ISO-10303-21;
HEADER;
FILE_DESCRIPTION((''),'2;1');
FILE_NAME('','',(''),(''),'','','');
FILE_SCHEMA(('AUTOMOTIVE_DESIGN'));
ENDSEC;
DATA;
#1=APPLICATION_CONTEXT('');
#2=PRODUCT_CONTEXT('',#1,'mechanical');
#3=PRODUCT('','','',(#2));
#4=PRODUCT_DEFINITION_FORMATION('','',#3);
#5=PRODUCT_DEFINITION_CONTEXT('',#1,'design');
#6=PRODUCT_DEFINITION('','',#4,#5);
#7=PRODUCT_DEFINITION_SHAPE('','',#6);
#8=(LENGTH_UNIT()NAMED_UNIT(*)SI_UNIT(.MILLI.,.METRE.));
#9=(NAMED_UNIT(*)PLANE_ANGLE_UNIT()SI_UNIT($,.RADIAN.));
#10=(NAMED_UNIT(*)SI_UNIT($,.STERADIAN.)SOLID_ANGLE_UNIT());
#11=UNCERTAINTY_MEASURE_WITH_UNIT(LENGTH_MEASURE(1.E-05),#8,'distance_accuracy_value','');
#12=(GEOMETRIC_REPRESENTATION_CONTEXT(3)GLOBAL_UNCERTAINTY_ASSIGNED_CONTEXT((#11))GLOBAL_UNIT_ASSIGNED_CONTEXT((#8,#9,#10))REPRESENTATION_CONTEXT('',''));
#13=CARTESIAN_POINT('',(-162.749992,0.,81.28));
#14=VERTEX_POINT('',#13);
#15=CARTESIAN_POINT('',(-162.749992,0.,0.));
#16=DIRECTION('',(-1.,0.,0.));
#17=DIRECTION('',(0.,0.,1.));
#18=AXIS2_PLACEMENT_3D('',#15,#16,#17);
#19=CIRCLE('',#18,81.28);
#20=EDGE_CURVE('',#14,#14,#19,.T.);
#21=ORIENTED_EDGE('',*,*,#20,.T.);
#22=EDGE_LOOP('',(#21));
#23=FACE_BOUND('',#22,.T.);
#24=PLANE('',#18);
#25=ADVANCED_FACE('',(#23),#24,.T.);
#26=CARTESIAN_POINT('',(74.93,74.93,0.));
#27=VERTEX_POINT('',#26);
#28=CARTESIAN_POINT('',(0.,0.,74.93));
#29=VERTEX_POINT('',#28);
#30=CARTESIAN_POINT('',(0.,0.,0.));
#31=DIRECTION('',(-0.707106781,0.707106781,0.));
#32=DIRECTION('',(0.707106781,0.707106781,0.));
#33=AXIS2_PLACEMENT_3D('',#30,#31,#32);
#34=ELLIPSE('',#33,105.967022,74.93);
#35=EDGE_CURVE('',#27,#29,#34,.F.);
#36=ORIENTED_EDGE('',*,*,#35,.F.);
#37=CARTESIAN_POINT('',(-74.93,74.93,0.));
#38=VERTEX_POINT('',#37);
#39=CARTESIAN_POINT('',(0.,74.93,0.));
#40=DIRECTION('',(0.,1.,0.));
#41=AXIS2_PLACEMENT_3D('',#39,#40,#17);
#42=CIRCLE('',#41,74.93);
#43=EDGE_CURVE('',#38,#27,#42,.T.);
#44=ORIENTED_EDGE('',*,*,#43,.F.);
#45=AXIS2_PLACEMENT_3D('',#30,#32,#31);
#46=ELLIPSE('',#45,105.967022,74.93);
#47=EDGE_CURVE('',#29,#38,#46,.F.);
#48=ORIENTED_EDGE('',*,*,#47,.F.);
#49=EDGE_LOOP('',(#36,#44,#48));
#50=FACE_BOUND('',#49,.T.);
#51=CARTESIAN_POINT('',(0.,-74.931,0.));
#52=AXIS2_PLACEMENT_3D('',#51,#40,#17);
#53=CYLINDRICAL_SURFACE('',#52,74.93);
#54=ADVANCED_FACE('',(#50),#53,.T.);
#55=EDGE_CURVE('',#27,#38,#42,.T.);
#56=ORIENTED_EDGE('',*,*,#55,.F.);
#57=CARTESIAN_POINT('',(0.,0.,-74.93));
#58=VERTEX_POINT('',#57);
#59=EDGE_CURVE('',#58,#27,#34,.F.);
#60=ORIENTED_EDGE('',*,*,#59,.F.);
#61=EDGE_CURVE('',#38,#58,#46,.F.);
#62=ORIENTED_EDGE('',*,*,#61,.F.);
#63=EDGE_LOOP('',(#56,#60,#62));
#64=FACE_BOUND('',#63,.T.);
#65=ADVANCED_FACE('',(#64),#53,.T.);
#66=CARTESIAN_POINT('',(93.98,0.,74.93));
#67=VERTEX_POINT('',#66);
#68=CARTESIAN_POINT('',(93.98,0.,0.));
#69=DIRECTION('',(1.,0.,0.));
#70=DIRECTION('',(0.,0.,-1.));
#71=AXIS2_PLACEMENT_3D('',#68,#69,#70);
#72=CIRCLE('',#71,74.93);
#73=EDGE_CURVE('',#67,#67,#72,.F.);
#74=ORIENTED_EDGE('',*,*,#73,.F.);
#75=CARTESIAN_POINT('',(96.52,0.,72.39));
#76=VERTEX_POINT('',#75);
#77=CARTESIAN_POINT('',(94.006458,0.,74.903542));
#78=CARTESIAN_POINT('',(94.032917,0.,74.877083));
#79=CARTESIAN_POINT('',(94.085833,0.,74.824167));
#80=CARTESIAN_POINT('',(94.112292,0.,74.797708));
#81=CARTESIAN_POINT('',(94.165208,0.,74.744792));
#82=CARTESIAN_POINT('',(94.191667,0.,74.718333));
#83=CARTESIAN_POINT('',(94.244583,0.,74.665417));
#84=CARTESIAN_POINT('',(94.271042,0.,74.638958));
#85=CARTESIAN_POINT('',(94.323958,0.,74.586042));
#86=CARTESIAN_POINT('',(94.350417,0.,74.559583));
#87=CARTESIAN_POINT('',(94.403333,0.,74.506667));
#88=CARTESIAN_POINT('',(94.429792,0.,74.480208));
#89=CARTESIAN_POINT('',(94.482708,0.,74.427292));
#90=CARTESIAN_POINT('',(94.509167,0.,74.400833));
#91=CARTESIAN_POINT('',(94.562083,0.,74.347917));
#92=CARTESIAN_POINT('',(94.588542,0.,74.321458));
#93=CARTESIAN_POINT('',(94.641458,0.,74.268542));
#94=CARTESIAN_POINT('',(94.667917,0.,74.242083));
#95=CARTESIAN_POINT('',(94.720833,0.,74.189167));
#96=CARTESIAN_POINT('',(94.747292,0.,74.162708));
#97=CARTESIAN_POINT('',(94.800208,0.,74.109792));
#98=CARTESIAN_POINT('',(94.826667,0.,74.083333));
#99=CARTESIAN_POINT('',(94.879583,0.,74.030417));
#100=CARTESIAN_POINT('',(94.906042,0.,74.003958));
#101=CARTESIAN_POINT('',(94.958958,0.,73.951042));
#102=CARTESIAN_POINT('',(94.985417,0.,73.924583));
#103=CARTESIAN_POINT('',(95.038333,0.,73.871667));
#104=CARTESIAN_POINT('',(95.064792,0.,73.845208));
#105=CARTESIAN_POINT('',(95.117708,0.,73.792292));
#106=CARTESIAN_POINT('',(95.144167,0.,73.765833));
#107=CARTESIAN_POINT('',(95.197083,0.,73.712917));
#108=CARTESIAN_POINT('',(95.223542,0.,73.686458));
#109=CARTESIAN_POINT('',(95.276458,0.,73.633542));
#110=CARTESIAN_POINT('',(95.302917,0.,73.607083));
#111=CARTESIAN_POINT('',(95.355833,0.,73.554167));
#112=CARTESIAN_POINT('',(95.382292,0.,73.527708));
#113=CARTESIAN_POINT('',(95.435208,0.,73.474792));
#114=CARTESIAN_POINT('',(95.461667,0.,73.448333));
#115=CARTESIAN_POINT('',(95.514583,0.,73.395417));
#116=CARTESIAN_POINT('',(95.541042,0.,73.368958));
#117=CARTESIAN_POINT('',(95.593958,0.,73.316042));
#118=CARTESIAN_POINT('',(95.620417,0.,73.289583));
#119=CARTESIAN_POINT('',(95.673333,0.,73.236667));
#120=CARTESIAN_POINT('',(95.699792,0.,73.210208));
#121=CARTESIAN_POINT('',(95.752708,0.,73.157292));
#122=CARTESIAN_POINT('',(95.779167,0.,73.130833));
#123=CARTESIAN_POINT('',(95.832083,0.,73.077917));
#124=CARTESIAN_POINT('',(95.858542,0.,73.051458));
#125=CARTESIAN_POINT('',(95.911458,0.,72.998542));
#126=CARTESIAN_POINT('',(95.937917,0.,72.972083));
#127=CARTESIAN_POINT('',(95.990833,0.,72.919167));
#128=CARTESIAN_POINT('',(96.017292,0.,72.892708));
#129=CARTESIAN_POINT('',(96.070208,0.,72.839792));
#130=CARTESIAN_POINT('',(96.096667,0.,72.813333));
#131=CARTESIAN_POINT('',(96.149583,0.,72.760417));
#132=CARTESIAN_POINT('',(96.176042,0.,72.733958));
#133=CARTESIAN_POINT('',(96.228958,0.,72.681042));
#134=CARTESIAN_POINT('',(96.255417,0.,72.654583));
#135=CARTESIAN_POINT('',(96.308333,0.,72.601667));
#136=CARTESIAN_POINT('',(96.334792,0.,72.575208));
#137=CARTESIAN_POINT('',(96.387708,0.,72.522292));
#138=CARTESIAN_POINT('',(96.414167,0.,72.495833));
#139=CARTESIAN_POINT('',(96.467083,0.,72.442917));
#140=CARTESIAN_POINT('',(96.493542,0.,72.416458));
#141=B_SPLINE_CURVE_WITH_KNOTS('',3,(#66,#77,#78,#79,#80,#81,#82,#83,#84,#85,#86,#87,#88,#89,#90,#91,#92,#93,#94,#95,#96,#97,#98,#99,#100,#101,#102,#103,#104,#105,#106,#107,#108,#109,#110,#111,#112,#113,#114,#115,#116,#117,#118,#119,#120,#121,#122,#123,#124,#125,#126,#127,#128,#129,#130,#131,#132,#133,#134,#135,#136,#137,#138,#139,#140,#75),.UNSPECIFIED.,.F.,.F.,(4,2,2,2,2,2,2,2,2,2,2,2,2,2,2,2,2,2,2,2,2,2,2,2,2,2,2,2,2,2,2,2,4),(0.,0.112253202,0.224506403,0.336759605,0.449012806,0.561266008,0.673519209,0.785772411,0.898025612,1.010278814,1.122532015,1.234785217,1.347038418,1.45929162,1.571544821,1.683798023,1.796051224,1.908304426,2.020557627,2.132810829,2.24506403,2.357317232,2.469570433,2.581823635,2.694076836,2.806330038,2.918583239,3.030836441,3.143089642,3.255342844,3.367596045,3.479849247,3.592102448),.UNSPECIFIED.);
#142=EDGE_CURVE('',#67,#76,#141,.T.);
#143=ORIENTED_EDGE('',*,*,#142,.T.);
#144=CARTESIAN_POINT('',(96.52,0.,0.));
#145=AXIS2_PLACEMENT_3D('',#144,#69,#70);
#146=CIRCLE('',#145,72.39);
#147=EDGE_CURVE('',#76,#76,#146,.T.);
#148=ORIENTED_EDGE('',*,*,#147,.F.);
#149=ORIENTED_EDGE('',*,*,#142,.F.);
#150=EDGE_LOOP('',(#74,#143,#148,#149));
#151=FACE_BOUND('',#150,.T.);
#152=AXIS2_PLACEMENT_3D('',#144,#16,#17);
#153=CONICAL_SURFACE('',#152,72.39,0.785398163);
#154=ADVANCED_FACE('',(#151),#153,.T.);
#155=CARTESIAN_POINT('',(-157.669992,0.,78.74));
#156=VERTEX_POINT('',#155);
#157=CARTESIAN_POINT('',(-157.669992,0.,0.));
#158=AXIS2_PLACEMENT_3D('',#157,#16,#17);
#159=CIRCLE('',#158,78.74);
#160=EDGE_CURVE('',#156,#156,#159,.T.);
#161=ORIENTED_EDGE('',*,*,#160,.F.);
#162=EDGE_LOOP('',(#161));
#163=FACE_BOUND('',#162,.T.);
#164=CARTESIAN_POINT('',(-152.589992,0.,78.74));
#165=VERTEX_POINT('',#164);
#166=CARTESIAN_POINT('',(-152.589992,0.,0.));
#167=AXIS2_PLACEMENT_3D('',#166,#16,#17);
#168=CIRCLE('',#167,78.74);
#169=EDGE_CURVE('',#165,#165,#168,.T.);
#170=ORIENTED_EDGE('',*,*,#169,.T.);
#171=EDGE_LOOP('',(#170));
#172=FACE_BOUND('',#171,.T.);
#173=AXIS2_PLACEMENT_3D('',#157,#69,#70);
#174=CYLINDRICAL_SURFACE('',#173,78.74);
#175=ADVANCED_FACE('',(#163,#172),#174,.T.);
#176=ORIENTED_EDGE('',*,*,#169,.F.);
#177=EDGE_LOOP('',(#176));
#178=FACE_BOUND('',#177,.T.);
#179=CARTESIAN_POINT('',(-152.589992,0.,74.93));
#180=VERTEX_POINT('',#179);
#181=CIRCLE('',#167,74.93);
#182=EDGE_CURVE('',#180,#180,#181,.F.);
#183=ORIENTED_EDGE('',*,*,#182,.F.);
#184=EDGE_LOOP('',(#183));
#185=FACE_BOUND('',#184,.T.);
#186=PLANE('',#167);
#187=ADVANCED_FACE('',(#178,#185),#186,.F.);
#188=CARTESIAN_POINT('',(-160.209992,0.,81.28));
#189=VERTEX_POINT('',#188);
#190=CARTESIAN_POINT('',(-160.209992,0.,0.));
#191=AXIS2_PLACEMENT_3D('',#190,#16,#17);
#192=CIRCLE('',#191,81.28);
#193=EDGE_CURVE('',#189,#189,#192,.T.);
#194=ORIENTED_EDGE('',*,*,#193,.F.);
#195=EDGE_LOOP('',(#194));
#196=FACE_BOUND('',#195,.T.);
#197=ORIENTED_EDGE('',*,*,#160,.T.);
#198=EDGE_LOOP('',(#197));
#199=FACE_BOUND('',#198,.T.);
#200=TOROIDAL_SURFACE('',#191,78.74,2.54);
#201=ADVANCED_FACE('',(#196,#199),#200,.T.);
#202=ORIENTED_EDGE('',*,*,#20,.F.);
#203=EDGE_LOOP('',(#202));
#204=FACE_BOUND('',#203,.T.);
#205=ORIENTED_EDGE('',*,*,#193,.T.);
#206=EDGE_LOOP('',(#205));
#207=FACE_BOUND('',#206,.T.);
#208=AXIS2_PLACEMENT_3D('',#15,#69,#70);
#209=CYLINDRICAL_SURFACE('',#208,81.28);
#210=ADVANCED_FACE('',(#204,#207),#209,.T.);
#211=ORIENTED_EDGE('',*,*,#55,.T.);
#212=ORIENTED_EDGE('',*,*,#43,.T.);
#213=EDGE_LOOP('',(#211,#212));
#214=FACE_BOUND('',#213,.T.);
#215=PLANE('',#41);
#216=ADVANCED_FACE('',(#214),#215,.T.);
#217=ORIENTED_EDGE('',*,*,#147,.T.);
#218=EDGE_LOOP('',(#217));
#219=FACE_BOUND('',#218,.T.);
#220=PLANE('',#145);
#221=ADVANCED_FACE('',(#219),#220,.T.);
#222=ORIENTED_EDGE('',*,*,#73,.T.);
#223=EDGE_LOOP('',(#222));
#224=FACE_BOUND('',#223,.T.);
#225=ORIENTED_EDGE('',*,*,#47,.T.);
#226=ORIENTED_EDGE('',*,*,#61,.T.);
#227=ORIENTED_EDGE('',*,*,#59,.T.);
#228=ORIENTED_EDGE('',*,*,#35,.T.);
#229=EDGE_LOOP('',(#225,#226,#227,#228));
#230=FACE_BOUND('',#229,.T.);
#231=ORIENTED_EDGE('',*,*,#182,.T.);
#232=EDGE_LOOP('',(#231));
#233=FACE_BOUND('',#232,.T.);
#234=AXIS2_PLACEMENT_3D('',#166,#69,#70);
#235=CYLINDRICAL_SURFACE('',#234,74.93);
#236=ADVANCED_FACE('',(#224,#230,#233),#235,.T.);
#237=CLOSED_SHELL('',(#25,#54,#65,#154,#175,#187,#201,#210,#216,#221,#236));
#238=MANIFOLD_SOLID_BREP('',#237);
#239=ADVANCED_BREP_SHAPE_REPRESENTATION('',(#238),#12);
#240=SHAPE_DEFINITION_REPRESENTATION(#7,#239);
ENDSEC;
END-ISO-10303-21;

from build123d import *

# Parameters (mm, degrees)
SALIENTE_EXTRUIR3_DEPTH      = 96.52
SALIENTE_EXTRUIR3_DEPTH_BACK = 152.589992
CROQUIS3_R                   = 74.93
SALIENTE_EXTRUIR4_REACH      = 228.619
CROQUIS4_R                   = 74.93
CROQUIS5_R                   = 78.74
SALIENTE_EXTRUIR5_DEPTH      = 5.08
CROQUIS6_R                   = 81.28
SALIENTE_EXTRUIR6_DEPTH      = 5.08
REDONDEO1_R                  = 2.54
CHAFL_N1_SIZE                = 2.54


# Some blends are built 0.0001 mm under size
with BuildPart() as part:
    # Croquis3 → Saliente-Extruir3 (new, two sides: drawn at the far end of the back side and taken through both)
    with BuildSketch(Plane(origin=(0, 0, 0), x_dir=(0, 0, -1), z_dir=(1, 0, 0)).offset(-SALIENTE_EXTRUIR3_DEPTH_BACK)):
        Circle(CROQUIS3_R)
    extrude(amount=SALIENTE_EXTRUIR3_DEPTH + SALIENTE_EXTRUIR3_DEPTH_BACK)

    # Croquis4 → Saliente-Extruir4 (add, up to next)
    with BuildSketch(Plane(origin=(0, 74.93, 0), x_dir=(1, 0, 0), z_dir=(0, 1, 0)), mode=Mode.PRIVATE) as saliente_extruir4_sk1:
        Circle(CROQUIS4_R)
    saliente_extruir4_tool1 = extrude(saliente_extruir4_sk1.sketch, amount=-SALIENTE_EXTRUIR4_REACH, mode=Mode.PRIVATE) - part.part
    add(saliente_extruir4_tool1.solids().sort_by_distance((0, 74.93, 0))[0])
    add(saliente_extruir4_tool1.solids().sort_by_distance((0, 74.93, 0))[1])

    # Croquis5 → Saliente-Extruir5 (add)
    with BuildSketch(Plane.ZY.offset(152.589992)):
        Circle(CROQUIS5_R)
    extrude(amount=SALIENTE_EXTRUIR5_DEPTH)

    # Croquis6 → Saliente-Extruir6 (add)
    with BuildSketch(Plane.ZY.offset(157.669992)):
        Circle(CROQUIS6_R)
    extrude(amount=SALIENTE_EXTRUIR6_DEPTH)

    # Redondeo1
    redondeo1_edges = [part.edges().sort_by_distance(p)[0] for p in [
        (-157.669992, 0, -81.28),
    ]]
    fillet(redondeo1_edges, radius=REDONDEO1_R - 0.0001)  # a hair under: the kernel refuses the full size

    # Chaflán1
    # the kernel refuses this chamfer: 2.54 mm, written as the material it takes off along each edge
    with BuildSketch(Plane(origin=(96.52, 0, 0), x_dir=(0, 0, -1), z_dir=(0, -1, 0))) as chafl_n1_piece_1:
        Polygon((74.93, -CHAFL_N1_SIZE), (74.93 - CHAFL_N1_SIZE, 0), (74.93, 0), align=None)
    revolve(axis=Axis((96.52, 0, 0), (1, 0, 0)), mode=Mode.SUBTRACT)


solid = part.part
